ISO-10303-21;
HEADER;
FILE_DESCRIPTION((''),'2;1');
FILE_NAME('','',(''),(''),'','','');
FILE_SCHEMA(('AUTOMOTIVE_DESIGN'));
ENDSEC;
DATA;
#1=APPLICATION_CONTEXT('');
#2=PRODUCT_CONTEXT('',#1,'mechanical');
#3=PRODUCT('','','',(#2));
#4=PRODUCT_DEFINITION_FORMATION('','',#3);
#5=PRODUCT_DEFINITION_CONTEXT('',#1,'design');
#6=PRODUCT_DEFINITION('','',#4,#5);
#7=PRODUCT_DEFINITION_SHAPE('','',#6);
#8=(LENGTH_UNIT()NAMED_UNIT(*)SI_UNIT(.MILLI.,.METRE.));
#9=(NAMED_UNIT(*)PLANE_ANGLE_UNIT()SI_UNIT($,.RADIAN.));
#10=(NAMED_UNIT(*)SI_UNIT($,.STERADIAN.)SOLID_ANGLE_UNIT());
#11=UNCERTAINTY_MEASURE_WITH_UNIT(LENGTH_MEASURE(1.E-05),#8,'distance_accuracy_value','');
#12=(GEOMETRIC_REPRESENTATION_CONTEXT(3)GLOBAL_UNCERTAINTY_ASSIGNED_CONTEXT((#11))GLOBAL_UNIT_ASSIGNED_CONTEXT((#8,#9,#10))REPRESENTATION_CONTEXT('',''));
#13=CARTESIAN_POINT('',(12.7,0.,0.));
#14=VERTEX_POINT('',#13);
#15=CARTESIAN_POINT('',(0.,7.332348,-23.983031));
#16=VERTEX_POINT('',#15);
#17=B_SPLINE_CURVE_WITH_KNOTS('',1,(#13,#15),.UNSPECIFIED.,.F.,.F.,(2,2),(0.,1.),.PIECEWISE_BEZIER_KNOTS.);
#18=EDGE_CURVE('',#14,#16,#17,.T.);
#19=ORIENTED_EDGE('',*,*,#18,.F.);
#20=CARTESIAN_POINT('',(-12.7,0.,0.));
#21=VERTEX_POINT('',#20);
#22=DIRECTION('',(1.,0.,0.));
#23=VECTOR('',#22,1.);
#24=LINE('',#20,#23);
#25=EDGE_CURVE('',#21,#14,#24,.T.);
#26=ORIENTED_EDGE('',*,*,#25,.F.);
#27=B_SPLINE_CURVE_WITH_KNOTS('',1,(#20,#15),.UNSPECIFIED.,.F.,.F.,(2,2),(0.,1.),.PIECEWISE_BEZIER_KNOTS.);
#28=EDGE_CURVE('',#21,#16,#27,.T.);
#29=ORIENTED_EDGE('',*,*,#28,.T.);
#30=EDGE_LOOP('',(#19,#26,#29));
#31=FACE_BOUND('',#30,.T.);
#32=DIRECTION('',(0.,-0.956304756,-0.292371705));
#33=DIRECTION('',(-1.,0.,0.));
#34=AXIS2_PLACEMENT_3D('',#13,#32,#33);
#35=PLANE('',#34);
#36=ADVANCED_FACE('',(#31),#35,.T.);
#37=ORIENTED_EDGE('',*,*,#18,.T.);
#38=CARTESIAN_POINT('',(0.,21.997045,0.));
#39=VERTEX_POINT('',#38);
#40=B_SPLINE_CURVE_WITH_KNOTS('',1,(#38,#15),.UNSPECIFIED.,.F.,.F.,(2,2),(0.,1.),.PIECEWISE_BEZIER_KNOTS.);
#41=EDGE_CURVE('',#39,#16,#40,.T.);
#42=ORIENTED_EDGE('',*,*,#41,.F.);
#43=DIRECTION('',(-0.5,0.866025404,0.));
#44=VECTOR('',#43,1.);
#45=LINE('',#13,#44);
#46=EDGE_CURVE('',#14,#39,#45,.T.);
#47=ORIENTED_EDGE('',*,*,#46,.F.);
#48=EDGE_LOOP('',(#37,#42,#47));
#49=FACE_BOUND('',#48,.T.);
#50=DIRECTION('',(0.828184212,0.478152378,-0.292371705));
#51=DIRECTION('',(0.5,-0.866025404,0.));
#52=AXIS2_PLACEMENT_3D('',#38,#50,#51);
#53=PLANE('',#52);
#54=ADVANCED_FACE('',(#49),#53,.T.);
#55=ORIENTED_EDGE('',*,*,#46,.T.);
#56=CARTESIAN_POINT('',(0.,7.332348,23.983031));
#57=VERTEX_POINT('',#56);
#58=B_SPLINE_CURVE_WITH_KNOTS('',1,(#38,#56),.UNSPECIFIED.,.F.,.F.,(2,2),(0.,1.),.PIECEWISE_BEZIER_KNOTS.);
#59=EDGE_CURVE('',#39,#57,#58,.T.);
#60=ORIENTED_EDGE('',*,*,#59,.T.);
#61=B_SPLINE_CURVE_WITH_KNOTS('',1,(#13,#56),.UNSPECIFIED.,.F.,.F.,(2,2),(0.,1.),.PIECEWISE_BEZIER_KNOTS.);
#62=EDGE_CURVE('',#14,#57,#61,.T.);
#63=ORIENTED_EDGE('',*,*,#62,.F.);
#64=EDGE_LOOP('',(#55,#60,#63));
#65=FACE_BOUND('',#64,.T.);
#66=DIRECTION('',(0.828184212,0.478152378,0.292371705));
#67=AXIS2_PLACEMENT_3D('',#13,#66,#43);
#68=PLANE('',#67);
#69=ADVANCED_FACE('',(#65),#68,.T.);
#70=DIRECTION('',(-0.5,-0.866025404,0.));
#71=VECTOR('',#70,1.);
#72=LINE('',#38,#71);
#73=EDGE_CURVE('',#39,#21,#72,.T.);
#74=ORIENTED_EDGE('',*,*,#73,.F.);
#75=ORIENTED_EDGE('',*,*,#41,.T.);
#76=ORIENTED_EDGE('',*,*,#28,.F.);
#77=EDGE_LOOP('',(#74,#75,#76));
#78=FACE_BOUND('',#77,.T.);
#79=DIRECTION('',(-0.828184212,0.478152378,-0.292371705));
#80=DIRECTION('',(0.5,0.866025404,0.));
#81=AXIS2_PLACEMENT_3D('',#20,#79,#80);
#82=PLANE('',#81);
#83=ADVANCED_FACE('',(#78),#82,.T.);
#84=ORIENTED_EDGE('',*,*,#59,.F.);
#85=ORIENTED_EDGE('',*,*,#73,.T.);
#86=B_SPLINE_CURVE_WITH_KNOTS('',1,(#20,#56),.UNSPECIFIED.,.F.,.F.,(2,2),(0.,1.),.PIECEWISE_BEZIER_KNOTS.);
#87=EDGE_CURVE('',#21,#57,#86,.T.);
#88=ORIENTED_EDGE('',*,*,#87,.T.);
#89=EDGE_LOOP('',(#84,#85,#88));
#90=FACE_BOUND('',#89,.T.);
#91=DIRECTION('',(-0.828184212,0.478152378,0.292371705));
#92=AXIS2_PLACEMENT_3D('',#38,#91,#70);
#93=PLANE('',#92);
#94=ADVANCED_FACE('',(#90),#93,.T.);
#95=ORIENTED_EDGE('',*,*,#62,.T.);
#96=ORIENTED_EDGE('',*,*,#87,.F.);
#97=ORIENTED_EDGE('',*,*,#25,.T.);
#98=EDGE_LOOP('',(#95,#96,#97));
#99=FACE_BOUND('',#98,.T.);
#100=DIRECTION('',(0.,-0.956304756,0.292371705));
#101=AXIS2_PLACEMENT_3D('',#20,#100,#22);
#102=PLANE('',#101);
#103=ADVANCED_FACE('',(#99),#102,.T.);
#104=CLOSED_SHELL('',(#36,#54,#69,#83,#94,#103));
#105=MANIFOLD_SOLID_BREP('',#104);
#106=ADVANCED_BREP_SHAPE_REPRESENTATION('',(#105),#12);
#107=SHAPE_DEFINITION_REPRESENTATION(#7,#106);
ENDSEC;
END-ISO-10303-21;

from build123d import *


# Not quite as in the source:
# - an extrude whose draft closes it to a point is written as a loft to that point


with BuildPart() as f1:
    # F0 (on Top) → F1 section 0
    with BuildSketch(Plane.XY, mode=Mode.PRIVATE) as f1_s0:
        Polygon((0, 21.9970452561), (-12.7, 0), (12.7, 0), align=None)
    loft([f1_s0.sketch, Vertex(0, 7.3323484187, 23.983031025)], ruled=True)

    # F1_face (on face) → F2 section 0
    with BuildSketch(Plane(origin=(0, 7.3323484187, 0), x_dir=(1, 0, 0), z_dir=(0, 0, -1)), mode=Mode.PRIVATE) as f2_s0:
        Polygon((-12.7, 7.3323484187), (0, -14.6646968374), (12.7, 7.3323484187), align=None)
    loft([f2_s0.sketch, Vertex(0, 7.3323484187, -23.983031025)], ruled=True)


solid = f1.part
